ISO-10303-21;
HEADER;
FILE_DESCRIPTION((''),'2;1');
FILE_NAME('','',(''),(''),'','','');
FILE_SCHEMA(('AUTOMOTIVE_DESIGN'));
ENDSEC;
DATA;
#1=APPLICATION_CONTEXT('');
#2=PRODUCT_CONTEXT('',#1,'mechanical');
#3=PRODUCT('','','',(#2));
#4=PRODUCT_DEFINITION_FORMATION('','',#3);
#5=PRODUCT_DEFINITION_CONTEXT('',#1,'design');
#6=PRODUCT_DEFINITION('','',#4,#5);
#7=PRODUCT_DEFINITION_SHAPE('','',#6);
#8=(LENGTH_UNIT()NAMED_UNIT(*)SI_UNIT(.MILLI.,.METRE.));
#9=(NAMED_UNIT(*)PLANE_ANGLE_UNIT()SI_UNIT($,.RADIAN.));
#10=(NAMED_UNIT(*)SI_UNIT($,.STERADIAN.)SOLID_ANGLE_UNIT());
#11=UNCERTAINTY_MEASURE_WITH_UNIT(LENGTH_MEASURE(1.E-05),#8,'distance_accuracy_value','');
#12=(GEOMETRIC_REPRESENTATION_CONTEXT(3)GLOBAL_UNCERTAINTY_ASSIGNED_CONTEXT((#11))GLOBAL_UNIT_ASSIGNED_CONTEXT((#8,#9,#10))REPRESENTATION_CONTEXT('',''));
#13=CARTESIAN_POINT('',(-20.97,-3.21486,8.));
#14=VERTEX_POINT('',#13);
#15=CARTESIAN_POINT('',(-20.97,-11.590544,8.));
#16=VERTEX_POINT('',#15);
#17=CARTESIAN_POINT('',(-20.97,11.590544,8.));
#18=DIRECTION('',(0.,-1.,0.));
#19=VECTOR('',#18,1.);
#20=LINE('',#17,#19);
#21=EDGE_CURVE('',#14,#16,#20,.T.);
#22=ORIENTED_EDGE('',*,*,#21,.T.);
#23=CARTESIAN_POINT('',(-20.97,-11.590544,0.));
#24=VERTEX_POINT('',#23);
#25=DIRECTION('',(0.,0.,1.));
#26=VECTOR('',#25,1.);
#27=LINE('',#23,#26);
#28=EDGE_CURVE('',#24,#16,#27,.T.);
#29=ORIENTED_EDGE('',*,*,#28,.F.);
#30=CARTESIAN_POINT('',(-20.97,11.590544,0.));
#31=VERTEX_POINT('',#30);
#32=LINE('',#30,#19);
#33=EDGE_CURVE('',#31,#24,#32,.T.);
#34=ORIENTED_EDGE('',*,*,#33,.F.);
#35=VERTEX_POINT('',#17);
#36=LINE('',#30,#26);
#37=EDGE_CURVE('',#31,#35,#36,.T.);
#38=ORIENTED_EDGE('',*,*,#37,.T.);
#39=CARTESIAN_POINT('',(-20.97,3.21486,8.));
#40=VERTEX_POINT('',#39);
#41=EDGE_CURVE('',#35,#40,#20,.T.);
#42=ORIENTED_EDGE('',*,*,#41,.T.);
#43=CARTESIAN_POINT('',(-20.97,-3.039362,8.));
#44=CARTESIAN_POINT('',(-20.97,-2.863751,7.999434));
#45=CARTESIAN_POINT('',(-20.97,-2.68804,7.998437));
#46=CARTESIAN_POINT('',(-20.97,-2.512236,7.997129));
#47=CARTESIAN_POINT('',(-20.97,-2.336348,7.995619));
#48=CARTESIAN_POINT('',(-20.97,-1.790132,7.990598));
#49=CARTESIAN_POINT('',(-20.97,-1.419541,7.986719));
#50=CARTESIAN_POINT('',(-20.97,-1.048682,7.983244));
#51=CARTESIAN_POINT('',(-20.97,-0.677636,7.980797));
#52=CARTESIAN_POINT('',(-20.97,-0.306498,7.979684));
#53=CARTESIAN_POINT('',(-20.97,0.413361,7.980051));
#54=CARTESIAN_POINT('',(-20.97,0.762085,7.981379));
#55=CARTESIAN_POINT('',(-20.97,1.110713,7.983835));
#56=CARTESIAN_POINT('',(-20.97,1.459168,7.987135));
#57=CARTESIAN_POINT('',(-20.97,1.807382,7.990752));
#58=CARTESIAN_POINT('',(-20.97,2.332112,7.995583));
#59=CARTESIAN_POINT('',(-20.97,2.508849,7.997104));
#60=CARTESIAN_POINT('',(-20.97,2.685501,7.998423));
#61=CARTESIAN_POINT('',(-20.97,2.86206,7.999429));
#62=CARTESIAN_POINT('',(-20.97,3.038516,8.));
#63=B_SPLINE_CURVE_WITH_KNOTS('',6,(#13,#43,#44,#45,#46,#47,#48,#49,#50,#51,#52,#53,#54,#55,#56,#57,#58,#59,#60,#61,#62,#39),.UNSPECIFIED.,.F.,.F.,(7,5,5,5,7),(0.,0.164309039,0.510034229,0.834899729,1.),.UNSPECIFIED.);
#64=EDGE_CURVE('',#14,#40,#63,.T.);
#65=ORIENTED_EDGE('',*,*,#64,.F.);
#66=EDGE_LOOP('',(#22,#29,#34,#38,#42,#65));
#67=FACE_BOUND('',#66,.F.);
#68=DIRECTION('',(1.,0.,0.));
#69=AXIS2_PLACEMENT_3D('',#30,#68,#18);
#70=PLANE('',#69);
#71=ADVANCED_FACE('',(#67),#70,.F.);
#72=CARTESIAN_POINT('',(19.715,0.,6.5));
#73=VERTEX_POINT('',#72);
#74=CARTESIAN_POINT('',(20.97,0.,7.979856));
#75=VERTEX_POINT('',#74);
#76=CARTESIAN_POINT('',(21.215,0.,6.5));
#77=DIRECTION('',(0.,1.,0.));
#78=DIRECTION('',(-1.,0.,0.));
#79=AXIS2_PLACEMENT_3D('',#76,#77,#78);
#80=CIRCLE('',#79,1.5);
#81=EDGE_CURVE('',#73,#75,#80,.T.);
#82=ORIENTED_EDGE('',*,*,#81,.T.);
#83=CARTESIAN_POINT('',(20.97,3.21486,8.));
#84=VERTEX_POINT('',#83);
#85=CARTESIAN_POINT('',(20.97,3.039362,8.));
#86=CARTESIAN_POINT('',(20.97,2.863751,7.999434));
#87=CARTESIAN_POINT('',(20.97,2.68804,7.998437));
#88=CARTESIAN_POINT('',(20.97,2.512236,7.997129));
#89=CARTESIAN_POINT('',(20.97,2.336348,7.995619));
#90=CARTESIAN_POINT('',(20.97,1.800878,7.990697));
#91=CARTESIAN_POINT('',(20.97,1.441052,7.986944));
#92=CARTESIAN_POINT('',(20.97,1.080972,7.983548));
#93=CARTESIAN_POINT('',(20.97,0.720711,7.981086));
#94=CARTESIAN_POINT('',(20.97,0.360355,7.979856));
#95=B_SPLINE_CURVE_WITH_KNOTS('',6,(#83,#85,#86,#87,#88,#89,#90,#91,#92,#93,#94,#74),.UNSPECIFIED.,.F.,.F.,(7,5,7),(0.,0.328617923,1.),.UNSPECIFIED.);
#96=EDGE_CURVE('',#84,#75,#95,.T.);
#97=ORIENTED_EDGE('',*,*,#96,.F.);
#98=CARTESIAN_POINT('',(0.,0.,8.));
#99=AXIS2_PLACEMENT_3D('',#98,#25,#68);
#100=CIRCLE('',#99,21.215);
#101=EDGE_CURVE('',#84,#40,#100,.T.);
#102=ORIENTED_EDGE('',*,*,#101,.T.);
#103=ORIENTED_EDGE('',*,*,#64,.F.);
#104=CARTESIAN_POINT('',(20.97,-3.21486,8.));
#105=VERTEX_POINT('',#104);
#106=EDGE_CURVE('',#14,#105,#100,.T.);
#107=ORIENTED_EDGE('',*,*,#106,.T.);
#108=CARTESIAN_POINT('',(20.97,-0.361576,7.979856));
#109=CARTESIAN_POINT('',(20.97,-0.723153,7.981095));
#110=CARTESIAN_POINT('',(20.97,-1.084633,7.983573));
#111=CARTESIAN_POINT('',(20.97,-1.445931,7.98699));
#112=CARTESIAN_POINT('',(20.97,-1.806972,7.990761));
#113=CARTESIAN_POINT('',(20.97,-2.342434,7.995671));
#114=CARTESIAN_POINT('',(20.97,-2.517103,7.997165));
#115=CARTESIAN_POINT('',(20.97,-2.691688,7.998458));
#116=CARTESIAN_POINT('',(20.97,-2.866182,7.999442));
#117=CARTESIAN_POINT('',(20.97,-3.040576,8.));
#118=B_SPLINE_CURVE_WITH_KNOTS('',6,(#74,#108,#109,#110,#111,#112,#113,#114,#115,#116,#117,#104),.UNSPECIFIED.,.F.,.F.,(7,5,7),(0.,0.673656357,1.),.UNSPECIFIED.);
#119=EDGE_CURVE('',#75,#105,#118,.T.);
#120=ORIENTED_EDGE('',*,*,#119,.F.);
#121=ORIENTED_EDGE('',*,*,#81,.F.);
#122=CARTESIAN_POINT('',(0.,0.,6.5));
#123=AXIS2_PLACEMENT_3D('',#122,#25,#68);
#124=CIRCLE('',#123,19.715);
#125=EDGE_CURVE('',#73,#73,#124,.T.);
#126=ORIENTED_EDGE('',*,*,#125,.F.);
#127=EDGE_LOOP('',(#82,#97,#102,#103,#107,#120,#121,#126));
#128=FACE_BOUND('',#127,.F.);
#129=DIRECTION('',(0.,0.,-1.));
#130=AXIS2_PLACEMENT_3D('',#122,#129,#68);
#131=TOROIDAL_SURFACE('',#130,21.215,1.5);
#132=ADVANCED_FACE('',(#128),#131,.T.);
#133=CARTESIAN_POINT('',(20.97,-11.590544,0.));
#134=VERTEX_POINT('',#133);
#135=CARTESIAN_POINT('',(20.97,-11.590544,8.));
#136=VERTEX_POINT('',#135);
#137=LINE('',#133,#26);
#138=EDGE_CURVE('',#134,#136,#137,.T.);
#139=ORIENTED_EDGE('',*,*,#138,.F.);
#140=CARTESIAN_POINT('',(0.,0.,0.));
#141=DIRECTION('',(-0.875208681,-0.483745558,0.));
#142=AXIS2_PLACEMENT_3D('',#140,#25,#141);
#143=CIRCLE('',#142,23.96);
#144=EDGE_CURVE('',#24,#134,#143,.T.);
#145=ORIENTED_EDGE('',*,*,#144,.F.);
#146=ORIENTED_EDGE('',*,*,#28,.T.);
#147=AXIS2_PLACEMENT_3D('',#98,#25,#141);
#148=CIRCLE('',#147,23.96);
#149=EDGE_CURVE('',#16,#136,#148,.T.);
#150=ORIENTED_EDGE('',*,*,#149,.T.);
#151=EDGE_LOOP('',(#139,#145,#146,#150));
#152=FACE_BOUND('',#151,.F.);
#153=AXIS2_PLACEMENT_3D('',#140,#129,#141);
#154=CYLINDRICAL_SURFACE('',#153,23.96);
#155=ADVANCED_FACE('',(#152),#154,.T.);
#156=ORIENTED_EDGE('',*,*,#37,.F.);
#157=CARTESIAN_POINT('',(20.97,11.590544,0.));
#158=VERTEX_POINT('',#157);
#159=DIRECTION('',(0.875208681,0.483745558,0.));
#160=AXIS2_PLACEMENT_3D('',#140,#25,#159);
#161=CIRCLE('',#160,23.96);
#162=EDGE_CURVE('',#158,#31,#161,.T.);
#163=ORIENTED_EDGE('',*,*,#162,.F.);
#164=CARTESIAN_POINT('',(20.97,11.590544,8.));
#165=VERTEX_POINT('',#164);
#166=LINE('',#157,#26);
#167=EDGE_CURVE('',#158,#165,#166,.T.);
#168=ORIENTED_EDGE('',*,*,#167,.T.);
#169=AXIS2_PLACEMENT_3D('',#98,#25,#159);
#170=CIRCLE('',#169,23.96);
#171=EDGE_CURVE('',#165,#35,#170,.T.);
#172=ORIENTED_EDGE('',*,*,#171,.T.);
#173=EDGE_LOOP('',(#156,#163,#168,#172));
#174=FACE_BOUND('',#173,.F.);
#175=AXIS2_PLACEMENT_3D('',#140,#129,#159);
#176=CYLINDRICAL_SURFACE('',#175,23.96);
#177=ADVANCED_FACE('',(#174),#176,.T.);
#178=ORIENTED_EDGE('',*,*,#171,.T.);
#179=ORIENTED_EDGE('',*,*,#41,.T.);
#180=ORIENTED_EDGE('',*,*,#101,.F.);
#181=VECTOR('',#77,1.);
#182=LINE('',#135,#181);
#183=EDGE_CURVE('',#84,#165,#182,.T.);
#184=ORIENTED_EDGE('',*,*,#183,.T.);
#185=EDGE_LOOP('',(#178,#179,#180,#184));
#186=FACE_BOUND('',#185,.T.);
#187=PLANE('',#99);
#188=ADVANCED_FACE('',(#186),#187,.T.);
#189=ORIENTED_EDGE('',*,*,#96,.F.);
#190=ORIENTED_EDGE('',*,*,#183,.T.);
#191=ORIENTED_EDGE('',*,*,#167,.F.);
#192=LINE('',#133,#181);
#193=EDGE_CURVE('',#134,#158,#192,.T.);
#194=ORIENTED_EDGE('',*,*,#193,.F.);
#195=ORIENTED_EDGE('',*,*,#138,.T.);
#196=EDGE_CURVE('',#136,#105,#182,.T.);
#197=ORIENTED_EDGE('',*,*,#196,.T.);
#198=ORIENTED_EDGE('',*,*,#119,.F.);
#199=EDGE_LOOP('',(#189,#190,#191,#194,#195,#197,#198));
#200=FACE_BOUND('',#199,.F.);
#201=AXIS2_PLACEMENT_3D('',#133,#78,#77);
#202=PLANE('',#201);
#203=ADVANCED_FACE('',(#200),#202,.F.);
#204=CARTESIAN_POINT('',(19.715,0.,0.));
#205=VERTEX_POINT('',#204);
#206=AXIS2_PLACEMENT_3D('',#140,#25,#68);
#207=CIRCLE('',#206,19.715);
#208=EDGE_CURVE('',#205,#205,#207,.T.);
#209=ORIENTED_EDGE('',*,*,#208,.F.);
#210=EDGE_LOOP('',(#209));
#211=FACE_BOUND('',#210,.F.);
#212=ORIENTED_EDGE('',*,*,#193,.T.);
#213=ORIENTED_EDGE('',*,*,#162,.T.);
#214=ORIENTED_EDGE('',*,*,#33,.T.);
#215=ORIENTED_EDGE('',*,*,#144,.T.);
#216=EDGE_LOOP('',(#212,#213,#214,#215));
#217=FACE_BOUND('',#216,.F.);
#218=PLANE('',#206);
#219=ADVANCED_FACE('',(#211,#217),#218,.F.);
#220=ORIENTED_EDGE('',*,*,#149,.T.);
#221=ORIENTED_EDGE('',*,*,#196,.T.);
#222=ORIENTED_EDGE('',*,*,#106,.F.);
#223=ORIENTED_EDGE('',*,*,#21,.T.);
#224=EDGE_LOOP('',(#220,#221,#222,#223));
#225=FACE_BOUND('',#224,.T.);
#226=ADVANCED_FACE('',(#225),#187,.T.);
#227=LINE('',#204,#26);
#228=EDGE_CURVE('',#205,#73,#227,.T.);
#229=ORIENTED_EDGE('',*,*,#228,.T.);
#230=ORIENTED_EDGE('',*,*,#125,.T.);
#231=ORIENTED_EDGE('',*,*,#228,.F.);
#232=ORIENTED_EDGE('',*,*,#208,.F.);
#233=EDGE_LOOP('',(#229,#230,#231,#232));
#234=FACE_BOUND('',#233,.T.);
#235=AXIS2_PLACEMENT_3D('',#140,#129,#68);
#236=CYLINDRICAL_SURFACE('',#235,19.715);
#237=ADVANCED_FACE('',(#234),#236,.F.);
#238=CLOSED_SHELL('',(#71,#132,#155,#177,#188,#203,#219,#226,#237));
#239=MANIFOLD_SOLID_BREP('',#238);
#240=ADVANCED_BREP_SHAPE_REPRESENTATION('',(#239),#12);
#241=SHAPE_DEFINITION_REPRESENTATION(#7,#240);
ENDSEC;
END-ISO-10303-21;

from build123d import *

# Parameters (mm, degrees)
F0_R     = 19.715
F1_DEPTH = 8


# Not quite as in the source:
# - a fillet or chamfer that OpenCascade refuses, or shapes differently, is made with other operations: its cross-section is extruded or revolved along the edge and cut away or added


with BuildPart() as f1:
    # F0 (on Top) → F1 (new body)
    with BuildSketch(Plane.XY):
        with BuildLine():
            Line((20.97, -11.5905435593), (20.97, 11.5905435593))
            ThreePointArc((20.97, 11.5905435593), (0, 23.96), (-20.97, 11.5905435593))
            Line((-20.97, 11.5905435593), (-20.97, -11.5905435593))
            ThreePointArc((-20.97, -11.5905435593), (0, -23.96), (20.97, -11.5905435593))
        make_face()
        Circle(F0_R, mode=Mode.SUBTRACT)
    extrude(amount=F1_DEPTH)

    # F2: fillet of radius 1.5 on 1 edges, made by hand

    # F2_s1 → F2_t2 (revolve, cut)
    with BuildSketch(Plane.XZ):
        with BuildLine():
            ThreePointArc((19.715, 6.5), (20.1543398282, 7.5606601718), (21.215, 8))
            Line((21.215, 8), (19.715, 8))
            Line((19.715, 8), (19.715, 6.5))
        make_face()
    revolve(axis=Axis((0, 0, 8), (0, 0, 1)), mode=Mode.SUBTRACT)


solid = f1.part
